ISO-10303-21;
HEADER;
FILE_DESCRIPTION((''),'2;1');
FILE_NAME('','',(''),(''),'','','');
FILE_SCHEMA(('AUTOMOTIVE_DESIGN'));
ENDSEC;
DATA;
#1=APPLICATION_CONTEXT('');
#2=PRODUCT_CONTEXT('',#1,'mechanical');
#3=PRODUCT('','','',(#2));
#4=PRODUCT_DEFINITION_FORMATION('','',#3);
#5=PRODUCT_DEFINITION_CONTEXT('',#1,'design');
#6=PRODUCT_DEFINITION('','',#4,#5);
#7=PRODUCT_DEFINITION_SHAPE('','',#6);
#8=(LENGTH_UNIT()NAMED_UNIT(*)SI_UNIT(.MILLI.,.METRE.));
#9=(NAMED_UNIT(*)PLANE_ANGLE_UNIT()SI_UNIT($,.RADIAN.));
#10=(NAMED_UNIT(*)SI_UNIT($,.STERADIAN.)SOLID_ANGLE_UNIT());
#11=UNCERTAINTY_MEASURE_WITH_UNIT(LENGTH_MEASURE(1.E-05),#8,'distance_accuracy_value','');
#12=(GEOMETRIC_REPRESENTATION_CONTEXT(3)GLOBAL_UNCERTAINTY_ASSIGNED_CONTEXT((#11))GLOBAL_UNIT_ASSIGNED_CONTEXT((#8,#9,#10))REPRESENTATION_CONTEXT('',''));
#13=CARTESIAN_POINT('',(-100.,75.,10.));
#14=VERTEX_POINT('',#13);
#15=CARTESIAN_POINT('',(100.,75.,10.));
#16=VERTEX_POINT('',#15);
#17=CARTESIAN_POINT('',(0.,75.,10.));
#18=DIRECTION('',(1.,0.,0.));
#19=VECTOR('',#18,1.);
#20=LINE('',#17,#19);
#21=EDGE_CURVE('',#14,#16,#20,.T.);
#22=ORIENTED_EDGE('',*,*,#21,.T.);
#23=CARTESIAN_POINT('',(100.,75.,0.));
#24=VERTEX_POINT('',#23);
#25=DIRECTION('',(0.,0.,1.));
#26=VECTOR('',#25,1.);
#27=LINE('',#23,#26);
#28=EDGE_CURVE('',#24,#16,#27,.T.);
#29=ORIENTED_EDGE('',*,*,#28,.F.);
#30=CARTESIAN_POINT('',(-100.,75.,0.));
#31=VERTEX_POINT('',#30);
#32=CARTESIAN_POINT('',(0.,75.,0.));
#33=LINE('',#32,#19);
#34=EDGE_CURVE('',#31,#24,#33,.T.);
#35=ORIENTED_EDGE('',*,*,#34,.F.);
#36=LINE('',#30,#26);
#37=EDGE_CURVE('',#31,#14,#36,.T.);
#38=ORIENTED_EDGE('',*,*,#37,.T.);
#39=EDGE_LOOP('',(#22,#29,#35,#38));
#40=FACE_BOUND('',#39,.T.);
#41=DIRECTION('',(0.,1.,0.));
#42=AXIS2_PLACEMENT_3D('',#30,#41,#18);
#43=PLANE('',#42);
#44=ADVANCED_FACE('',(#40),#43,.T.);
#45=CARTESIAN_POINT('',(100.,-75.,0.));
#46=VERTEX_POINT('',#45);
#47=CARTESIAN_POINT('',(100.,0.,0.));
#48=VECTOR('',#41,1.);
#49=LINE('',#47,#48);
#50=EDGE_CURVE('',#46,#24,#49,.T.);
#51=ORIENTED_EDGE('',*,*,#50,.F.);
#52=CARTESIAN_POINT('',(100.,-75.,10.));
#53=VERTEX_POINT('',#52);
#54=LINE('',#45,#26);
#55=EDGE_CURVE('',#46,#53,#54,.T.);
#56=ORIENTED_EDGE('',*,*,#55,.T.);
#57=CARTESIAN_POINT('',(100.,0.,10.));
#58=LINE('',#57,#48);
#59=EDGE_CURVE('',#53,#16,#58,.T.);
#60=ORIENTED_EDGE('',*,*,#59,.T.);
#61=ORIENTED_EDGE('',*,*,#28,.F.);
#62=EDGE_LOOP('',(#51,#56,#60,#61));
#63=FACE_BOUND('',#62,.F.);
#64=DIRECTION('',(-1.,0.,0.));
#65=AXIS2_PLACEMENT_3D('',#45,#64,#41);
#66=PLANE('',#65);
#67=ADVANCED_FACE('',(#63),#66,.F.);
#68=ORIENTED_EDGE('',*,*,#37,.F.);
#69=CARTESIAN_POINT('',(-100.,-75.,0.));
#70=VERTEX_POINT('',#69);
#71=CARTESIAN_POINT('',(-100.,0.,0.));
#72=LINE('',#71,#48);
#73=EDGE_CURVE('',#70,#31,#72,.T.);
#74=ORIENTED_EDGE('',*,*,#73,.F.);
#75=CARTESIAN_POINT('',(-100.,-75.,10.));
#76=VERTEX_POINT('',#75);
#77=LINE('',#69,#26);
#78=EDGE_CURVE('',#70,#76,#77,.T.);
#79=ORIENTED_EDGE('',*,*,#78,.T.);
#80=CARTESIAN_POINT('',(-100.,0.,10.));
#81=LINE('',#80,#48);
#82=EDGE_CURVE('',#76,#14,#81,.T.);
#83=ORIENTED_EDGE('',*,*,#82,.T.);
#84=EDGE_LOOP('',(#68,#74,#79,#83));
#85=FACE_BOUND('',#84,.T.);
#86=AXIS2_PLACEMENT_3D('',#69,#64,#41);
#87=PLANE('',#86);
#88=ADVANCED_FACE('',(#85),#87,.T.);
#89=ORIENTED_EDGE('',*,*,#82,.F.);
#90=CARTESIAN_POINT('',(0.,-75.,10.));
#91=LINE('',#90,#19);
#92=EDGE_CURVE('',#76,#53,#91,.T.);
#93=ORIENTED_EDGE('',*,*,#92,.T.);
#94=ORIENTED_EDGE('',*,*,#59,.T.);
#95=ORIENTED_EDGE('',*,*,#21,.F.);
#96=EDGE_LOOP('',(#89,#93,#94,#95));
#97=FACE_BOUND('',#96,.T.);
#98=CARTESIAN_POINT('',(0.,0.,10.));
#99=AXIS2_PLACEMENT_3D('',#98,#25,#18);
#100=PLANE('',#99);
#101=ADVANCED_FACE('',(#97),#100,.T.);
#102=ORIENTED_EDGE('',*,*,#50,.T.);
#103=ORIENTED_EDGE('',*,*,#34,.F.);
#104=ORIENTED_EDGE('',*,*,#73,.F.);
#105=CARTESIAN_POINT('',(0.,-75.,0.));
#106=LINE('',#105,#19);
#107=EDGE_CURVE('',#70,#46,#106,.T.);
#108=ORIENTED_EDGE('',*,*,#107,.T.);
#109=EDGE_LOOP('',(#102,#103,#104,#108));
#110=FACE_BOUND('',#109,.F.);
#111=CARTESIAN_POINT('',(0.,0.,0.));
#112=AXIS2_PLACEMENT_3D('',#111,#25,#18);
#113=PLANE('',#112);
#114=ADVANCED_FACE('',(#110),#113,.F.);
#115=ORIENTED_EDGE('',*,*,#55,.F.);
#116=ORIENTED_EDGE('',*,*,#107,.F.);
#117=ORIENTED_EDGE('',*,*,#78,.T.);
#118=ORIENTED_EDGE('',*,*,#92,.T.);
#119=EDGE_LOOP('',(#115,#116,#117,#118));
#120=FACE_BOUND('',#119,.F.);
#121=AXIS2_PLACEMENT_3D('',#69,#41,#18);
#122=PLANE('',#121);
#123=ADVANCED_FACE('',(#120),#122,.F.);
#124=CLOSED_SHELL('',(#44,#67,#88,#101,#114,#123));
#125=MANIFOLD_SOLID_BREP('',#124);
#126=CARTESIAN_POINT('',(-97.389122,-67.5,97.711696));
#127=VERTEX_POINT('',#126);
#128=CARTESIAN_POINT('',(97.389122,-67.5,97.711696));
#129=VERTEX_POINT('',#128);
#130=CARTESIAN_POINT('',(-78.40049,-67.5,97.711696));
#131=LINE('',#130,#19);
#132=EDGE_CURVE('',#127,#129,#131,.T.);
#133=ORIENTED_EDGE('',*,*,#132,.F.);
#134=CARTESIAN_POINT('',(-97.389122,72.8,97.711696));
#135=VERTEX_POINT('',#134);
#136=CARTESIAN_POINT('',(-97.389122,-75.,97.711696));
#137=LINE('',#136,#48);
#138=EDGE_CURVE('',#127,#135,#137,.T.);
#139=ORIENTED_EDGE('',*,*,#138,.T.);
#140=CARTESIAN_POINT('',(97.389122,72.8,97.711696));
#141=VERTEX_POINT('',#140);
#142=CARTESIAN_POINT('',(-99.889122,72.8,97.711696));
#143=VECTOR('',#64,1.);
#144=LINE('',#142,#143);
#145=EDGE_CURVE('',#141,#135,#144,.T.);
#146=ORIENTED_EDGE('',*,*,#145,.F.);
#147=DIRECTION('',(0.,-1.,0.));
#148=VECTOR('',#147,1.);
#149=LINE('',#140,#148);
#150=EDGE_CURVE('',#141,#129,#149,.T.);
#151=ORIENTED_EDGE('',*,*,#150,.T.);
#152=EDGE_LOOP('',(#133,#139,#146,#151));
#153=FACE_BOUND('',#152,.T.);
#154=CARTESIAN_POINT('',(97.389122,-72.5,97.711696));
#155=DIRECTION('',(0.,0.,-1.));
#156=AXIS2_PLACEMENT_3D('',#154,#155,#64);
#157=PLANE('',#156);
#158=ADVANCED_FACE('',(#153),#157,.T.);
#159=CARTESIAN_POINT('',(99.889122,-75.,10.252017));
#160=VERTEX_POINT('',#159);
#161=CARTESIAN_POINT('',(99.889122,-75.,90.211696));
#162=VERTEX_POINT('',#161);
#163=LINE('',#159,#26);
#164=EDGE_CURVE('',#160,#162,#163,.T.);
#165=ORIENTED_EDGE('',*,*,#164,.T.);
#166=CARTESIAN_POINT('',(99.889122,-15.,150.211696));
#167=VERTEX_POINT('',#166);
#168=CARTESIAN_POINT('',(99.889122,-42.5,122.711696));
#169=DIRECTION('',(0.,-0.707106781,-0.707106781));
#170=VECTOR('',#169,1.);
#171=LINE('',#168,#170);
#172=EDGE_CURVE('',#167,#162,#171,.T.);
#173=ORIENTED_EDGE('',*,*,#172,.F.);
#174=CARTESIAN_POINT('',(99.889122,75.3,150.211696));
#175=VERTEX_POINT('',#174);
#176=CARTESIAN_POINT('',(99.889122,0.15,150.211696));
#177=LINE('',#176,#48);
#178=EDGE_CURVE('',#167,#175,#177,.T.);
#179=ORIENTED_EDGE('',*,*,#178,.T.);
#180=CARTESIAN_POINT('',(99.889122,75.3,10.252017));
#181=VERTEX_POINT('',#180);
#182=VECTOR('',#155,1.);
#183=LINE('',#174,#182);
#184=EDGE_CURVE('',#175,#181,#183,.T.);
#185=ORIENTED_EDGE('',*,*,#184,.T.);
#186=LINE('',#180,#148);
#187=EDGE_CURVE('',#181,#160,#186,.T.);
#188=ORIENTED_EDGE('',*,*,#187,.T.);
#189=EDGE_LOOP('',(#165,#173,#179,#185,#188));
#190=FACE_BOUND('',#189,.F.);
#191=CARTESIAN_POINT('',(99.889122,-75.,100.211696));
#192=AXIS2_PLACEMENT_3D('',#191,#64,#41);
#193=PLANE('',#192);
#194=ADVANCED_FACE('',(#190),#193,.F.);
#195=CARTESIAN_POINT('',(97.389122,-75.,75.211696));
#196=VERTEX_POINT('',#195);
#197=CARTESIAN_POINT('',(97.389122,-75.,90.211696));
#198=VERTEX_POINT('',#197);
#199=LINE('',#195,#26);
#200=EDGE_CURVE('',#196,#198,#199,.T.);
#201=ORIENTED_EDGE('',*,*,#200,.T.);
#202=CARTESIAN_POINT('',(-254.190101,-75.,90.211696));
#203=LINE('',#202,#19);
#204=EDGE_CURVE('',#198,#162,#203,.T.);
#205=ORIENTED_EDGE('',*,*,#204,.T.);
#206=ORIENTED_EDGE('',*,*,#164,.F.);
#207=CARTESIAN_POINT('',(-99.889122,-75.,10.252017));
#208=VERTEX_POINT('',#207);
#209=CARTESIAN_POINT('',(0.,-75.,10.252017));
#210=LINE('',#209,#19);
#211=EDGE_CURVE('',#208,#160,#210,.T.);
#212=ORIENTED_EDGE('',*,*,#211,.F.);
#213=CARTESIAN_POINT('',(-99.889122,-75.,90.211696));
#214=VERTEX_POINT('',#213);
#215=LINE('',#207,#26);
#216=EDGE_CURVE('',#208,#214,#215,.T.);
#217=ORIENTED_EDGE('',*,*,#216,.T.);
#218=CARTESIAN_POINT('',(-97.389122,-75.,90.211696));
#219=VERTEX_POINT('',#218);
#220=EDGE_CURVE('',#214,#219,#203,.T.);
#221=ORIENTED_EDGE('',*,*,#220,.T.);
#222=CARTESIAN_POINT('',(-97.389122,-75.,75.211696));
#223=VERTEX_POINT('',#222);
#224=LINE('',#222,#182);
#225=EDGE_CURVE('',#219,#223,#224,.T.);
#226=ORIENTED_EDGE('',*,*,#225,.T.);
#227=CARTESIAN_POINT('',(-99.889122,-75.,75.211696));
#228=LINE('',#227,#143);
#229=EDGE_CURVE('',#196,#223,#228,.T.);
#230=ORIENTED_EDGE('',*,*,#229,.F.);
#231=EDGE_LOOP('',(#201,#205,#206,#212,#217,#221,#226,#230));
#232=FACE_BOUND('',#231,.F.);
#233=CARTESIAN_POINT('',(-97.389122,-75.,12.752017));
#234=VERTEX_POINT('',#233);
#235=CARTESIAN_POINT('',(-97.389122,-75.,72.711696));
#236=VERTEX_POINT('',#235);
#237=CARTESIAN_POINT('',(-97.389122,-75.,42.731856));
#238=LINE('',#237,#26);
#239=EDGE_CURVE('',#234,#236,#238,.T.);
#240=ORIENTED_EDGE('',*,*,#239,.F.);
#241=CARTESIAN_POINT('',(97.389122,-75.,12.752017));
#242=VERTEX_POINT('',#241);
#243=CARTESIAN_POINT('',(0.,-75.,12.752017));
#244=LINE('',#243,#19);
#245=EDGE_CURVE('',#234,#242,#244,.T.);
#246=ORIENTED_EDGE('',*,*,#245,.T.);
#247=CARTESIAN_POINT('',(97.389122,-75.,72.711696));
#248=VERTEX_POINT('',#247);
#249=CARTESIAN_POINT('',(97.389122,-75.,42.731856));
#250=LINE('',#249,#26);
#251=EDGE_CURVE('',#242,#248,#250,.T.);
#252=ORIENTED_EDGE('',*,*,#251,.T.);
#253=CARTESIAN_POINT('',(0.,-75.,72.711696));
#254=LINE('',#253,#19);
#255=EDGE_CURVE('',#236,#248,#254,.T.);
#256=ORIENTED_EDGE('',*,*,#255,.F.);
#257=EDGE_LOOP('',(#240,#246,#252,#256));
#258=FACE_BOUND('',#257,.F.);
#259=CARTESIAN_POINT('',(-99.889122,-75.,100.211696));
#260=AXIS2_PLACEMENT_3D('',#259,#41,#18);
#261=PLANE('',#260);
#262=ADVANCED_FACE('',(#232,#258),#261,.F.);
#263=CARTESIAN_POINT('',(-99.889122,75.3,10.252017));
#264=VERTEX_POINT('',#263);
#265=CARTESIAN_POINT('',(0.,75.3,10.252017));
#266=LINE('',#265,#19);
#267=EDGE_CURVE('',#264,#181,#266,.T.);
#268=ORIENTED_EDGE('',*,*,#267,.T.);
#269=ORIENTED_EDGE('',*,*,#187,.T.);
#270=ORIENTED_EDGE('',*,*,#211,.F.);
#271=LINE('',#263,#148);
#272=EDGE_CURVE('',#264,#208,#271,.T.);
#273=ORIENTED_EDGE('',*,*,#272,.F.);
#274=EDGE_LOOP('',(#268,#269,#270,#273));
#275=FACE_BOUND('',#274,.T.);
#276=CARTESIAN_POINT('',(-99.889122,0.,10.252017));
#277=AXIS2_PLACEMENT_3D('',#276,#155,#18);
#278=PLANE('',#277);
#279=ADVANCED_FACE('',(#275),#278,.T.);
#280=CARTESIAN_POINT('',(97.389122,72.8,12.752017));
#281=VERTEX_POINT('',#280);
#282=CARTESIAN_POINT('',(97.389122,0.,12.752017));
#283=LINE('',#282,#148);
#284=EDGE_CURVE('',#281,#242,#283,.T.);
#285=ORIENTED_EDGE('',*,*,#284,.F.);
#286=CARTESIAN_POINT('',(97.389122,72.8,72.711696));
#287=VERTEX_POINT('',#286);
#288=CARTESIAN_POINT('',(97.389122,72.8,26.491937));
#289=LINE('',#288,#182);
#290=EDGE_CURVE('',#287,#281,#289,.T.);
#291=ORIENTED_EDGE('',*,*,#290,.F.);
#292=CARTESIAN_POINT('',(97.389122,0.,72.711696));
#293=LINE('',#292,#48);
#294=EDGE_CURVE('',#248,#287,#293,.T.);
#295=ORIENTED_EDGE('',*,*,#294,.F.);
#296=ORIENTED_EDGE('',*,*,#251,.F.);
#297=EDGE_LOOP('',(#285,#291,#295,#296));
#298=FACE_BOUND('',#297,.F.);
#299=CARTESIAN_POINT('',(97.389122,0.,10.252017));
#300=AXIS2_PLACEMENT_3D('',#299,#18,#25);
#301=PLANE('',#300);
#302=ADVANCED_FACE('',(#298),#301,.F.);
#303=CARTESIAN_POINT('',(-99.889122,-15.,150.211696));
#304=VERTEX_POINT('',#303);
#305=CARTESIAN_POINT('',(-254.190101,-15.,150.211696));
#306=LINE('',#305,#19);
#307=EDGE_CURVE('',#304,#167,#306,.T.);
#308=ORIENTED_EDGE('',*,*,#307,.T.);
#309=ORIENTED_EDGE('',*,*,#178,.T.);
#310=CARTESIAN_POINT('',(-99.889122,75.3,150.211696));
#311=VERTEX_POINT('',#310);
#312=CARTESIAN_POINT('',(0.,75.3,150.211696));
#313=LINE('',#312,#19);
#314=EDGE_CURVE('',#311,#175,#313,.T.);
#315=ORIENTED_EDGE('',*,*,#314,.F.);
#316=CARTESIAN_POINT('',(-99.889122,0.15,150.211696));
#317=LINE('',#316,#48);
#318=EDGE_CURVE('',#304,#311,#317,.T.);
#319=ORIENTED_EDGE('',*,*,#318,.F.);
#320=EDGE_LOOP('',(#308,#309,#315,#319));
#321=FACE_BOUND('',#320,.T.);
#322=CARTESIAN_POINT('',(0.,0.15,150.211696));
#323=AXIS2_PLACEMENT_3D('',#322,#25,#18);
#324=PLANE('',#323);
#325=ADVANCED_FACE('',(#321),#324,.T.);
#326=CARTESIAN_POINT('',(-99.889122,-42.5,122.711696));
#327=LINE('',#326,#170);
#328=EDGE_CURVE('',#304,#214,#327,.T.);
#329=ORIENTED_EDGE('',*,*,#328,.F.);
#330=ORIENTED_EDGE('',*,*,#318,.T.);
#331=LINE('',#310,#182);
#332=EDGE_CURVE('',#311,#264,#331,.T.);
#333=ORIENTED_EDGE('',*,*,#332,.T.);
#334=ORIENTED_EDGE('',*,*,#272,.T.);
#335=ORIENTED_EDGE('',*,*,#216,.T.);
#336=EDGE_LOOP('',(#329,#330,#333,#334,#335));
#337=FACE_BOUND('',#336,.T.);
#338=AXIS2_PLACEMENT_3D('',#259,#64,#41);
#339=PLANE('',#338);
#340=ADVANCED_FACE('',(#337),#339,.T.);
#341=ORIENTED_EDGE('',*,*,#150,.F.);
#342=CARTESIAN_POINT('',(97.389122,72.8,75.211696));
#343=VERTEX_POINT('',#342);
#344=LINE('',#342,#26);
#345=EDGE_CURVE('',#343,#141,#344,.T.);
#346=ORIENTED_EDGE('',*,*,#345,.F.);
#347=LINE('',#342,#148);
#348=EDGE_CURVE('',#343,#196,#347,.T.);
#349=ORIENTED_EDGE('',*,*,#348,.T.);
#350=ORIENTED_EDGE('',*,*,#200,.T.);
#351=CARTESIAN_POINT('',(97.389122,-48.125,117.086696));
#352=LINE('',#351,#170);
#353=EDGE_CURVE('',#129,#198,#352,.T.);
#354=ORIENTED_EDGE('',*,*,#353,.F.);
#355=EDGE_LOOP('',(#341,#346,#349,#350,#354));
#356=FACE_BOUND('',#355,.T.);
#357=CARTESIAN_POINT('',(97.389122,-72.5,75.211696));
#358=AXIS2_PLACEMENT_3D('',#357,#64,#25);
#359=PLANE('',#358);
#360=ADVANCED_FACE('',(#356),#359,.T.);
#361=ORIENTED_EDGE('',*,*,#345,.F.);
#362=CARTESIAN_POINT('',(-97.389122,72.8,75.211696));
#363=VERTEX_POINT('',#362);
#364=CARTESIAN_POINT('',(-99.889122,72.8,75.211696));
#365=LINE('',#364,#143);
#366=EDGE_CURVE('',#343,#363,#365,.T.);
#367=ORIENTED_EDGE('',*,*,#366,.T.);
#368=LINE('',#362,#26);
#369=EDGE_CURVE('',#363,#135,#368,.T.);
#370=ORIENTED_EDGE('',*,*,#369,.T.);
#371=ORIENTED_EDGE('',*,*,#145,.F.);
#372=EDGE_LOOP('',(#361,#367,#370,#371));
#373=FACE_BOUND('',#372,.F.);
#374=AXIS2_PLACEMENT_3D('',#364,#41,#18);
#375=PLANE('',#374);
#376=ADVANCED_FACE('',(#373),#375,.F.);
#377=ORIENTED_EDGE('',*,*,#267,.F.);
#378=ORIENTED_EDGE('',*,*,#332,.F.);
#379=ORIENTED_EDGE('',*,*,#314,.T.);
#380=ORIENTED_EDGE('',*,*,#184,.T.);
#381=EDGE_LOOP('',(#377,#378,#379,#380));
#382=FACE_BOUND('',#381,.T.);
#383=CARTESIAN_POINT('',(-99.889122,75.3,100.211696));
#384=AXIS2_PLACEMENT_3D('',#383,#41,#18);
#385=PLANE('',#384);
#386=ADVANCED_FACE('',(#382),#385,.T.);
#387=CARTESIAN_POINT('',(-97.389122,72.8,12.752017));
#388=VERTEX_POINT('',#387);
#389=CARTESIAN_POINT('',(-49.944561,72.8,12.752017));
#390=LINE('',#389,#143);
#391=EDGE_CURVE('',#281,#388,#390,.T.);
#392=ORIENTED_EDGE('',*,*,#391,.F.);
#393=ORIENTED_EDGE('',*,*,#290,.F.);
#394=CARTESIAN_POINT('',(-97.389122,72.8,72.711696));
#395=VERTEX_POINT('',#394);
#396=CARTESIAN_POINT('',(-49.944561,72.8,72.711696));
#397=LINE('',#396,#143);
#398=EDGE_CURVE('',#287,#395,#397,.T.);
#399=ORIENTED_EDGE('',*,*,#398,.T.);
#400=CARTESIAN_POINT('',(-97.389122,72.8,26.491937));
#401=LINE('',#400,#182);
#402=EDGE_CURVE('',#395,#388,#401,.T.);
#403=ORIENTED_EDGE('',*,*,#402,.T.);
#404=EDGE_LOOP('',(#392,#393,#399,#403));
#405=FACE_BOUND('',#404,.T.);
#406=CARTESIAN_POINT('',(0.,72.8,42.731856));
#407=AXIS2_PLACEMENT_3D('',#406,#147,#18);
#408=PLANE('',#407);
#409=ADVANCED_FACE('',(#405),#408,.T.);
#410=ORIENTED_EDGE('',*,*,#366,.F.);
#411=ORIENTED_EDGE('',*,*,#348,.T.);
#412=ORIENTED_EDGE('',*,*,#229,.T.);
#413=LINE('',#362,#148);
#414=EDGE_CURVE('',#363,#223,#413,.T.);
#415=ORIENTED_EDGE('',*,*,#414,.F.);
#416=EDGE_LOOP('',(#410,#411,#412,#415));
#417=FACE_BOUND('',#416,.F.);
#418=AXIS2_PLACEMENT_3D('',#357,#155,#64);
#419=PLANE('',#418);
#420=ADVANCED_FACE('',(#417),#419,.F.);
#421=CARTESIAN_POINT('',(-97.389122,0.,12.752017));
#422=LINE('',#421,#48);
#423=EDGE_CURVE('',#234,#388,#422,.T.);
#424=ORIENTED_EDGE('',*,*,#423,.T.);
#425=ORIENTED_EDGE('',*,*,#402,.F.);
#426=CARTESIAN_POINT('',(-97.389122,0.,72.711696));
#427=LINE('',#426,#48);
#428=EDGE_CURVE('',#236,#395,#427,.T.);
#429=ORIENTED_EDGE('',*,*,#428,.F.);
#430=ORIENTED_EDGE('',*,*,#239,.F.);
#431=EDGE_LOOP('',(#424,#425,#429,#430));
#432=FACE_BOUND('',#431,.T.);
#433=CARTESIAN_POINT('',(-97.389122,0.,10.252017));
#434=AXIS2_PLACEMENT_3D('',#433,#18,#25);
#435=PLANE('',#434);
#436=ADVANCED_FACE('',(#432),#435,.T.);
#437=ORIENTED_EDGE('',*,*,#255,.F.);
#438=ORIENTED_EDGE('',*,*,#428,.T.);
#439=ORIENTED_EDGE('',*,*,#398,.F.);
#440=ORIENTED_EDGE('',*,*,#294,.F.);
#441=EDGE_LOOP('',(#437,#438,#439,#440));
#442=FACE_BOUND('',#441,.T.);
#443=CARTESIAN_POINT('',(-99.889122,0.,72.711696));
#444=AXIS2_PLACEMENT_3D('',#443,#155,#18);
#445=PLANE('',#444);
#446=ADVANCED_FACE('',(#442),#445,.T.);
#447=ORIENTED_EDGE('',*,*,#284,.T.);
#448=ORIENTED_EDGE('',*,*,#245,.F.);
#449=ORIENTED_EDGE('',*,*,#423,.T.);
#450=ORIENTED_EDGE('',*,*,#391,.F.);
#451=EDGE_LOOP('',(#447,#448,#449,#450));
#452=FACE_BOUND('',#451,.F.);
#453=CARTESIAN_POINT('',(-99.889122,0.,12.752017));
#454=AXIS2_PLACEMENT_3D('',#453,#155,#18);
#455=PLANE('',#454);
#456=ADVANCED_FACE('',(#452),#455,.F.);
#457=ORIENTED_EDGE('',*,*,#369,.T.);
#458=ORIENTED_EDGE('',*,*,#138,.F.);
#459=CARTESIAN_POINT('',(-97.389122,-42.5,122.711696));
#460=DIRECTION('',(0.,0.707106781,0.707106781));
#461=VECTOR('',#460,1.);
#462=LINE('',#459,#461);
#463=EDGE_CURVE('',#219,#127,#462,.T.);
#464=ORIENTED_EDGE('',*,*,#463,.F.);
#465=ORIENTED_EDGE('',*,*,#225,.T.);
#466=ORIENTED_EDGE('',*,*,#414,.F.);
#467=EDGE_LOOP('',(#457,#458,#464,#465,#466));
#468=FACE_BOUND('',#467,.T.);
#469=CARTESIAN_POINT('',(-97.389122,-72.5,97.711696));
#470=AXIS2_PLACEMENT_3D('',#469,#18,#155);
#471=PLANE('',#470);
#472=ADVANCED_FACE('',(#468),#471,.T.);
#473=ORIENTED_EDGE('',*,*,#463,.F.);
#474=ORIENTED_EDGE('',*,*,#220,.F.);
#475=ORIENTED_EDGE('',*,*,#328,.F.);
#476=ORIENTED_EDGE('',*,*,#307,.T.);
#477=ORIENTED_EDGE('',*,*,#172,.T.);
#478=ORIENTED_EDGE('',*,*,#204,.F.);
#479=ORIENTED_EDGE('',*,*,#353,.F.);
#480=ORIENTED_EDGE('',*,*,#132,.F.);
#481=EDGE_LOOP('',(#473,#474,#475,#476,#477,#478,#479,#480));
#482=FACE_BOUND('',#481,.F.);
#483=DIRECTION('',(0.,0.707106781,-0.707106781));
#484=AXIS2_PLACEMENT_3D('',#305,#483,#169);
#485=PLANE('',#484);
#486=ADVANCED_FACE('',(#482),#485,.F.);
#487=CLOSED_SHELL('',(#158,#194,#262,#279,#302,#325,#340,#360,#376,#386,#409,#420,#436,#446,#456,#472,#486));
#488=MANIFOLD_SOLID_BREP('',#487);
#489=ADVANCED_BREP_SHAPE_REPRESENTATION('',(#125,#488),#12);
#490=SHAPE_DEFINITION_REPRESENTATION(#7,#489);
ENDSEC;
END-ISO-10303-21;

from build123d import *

# Parameters (mm, degrees)
F0_W         = 200
F0_H         = 150
F1_DEPTH     = 10
F2_W         = 199.7782438993
F2_H         = 64.9596797302
F3_DEPTH     = 75
F4_DEPTH     = 75.3
F5_T         = -2.5
F6_DEPTH     = 25
F7_T         = -2.5
F8_W         = 199.7782438993
F8_H         = 150.3
F9_DEPTH     = 50
F10_T1_DEPTH = 508.3802024553
F12_DEPTH    = 9.4


# Not quite as in the source:
# - a fillet or chamfer that OpenCascade refuses, or shapes differently, is made with other operations: its cross-section is extruded or revolved along the edge and cut away or added
# - a shell that OpenCascade refuses in one call is made with other operations: the cavity is built on its own and cut out
# - the program builds the solid bodies; features that only make, move or delete a surface that nothing else refers to are left out


with BuildPart() as f1:
    # F0 (on Top) → F1 (new body)
    with BuildSketch(Plane.XY):
        Rectangle(F0_W, F0_H)
    extrude(amount=F1_DEPTH)


with BuildPart() as f3:
    # F2 (on Front) → F3 (new body)
    with BuildSketch(Plane.XZ):
        with Locations((0, 42.7318564616)):
            Rectangle(F2_W, F2_H)
    extrude(amount=F3_DEPTH)

    # F4 (add): a face of the model
    f4_faces = [f3.faces().sort_by_distance(p)[0] for p in [
        (0, 0, 42.7318564616),
    ]]
    extrude(f4_faces, amount=F4_DEPTH)

    # F5
    f5_openings = [f3.faces().sort_by_distance(p)[0] for p in [
        (0, -75, 42.731856),
    ]]
    offset(amount=F5_T, openings=f5_openings)

    # F6 (add): a face of the model
    f6_faces = [f3.faces().sort_by_distance(p)[0] for p in [
        (0, 0.15, 75.2116963267),
    ]]
    extrude(f6_faces, amount=F6_DEPTH)

    # F7: a shell. OpenCascade refuses it in one call, so the cavity is built on its own and cut out:
    # the body offset inwards by the wall thickness, plus a prism from it out through each open face.
    f7_core = offset(f3.part, amount=F7_T, kind=Kind.INTERSECTION, mode=Mode.PRIVATE)
    f7_exits = [f7_core.faces().sort_by_distance(p)[0] for p in [
        (0, -72.5, 86.461696),
    ]]
    add(f7_core, mode=Mode.SUBTRACT)
    extrude(f7_exits, amount=-F7_T, mode=Mode.SUBTRACT)

    # F8 (on face) → F9 (join)
    with BuildSketch(Plane.XY.offset(100.2116963267)):
        with Locations((0, 0.15)):
            Rectangle(F8_W, F8_H)
    extrude(amount=F9_DEPTH)

    # F10: chamfer of 60 on 1 edges, made by hand

    # F10_s2 → F10_t1 (cut)
    with BuildSketch(Plane.YZ.offset(-254.1901012276)):
        Polygon((-15, 150.2116963267), (-75, 90.2116963267), (-75, 150.2116963267), align=None)
    extrude(amount=F10_T1_DEPTH, mode=Mode.SUBTRACT)

    # F11 (on face) → F12 (join)
    with BuildSketch(Plane(origin=(0, -82.6058481634, 82.6058481634), x_dir=(1, 0, 0), z_dir=(0, -0.7071067812, 0.7071067812))):
        Polygon((76.5384733677, 70.738479495), (-67.3584118485, 70.738479495), (76.5384733677, 43.4501171112), align=None)
    extrude(amount=-F12_DEPTH)


solid = Compound([f1.part, f3.part])
